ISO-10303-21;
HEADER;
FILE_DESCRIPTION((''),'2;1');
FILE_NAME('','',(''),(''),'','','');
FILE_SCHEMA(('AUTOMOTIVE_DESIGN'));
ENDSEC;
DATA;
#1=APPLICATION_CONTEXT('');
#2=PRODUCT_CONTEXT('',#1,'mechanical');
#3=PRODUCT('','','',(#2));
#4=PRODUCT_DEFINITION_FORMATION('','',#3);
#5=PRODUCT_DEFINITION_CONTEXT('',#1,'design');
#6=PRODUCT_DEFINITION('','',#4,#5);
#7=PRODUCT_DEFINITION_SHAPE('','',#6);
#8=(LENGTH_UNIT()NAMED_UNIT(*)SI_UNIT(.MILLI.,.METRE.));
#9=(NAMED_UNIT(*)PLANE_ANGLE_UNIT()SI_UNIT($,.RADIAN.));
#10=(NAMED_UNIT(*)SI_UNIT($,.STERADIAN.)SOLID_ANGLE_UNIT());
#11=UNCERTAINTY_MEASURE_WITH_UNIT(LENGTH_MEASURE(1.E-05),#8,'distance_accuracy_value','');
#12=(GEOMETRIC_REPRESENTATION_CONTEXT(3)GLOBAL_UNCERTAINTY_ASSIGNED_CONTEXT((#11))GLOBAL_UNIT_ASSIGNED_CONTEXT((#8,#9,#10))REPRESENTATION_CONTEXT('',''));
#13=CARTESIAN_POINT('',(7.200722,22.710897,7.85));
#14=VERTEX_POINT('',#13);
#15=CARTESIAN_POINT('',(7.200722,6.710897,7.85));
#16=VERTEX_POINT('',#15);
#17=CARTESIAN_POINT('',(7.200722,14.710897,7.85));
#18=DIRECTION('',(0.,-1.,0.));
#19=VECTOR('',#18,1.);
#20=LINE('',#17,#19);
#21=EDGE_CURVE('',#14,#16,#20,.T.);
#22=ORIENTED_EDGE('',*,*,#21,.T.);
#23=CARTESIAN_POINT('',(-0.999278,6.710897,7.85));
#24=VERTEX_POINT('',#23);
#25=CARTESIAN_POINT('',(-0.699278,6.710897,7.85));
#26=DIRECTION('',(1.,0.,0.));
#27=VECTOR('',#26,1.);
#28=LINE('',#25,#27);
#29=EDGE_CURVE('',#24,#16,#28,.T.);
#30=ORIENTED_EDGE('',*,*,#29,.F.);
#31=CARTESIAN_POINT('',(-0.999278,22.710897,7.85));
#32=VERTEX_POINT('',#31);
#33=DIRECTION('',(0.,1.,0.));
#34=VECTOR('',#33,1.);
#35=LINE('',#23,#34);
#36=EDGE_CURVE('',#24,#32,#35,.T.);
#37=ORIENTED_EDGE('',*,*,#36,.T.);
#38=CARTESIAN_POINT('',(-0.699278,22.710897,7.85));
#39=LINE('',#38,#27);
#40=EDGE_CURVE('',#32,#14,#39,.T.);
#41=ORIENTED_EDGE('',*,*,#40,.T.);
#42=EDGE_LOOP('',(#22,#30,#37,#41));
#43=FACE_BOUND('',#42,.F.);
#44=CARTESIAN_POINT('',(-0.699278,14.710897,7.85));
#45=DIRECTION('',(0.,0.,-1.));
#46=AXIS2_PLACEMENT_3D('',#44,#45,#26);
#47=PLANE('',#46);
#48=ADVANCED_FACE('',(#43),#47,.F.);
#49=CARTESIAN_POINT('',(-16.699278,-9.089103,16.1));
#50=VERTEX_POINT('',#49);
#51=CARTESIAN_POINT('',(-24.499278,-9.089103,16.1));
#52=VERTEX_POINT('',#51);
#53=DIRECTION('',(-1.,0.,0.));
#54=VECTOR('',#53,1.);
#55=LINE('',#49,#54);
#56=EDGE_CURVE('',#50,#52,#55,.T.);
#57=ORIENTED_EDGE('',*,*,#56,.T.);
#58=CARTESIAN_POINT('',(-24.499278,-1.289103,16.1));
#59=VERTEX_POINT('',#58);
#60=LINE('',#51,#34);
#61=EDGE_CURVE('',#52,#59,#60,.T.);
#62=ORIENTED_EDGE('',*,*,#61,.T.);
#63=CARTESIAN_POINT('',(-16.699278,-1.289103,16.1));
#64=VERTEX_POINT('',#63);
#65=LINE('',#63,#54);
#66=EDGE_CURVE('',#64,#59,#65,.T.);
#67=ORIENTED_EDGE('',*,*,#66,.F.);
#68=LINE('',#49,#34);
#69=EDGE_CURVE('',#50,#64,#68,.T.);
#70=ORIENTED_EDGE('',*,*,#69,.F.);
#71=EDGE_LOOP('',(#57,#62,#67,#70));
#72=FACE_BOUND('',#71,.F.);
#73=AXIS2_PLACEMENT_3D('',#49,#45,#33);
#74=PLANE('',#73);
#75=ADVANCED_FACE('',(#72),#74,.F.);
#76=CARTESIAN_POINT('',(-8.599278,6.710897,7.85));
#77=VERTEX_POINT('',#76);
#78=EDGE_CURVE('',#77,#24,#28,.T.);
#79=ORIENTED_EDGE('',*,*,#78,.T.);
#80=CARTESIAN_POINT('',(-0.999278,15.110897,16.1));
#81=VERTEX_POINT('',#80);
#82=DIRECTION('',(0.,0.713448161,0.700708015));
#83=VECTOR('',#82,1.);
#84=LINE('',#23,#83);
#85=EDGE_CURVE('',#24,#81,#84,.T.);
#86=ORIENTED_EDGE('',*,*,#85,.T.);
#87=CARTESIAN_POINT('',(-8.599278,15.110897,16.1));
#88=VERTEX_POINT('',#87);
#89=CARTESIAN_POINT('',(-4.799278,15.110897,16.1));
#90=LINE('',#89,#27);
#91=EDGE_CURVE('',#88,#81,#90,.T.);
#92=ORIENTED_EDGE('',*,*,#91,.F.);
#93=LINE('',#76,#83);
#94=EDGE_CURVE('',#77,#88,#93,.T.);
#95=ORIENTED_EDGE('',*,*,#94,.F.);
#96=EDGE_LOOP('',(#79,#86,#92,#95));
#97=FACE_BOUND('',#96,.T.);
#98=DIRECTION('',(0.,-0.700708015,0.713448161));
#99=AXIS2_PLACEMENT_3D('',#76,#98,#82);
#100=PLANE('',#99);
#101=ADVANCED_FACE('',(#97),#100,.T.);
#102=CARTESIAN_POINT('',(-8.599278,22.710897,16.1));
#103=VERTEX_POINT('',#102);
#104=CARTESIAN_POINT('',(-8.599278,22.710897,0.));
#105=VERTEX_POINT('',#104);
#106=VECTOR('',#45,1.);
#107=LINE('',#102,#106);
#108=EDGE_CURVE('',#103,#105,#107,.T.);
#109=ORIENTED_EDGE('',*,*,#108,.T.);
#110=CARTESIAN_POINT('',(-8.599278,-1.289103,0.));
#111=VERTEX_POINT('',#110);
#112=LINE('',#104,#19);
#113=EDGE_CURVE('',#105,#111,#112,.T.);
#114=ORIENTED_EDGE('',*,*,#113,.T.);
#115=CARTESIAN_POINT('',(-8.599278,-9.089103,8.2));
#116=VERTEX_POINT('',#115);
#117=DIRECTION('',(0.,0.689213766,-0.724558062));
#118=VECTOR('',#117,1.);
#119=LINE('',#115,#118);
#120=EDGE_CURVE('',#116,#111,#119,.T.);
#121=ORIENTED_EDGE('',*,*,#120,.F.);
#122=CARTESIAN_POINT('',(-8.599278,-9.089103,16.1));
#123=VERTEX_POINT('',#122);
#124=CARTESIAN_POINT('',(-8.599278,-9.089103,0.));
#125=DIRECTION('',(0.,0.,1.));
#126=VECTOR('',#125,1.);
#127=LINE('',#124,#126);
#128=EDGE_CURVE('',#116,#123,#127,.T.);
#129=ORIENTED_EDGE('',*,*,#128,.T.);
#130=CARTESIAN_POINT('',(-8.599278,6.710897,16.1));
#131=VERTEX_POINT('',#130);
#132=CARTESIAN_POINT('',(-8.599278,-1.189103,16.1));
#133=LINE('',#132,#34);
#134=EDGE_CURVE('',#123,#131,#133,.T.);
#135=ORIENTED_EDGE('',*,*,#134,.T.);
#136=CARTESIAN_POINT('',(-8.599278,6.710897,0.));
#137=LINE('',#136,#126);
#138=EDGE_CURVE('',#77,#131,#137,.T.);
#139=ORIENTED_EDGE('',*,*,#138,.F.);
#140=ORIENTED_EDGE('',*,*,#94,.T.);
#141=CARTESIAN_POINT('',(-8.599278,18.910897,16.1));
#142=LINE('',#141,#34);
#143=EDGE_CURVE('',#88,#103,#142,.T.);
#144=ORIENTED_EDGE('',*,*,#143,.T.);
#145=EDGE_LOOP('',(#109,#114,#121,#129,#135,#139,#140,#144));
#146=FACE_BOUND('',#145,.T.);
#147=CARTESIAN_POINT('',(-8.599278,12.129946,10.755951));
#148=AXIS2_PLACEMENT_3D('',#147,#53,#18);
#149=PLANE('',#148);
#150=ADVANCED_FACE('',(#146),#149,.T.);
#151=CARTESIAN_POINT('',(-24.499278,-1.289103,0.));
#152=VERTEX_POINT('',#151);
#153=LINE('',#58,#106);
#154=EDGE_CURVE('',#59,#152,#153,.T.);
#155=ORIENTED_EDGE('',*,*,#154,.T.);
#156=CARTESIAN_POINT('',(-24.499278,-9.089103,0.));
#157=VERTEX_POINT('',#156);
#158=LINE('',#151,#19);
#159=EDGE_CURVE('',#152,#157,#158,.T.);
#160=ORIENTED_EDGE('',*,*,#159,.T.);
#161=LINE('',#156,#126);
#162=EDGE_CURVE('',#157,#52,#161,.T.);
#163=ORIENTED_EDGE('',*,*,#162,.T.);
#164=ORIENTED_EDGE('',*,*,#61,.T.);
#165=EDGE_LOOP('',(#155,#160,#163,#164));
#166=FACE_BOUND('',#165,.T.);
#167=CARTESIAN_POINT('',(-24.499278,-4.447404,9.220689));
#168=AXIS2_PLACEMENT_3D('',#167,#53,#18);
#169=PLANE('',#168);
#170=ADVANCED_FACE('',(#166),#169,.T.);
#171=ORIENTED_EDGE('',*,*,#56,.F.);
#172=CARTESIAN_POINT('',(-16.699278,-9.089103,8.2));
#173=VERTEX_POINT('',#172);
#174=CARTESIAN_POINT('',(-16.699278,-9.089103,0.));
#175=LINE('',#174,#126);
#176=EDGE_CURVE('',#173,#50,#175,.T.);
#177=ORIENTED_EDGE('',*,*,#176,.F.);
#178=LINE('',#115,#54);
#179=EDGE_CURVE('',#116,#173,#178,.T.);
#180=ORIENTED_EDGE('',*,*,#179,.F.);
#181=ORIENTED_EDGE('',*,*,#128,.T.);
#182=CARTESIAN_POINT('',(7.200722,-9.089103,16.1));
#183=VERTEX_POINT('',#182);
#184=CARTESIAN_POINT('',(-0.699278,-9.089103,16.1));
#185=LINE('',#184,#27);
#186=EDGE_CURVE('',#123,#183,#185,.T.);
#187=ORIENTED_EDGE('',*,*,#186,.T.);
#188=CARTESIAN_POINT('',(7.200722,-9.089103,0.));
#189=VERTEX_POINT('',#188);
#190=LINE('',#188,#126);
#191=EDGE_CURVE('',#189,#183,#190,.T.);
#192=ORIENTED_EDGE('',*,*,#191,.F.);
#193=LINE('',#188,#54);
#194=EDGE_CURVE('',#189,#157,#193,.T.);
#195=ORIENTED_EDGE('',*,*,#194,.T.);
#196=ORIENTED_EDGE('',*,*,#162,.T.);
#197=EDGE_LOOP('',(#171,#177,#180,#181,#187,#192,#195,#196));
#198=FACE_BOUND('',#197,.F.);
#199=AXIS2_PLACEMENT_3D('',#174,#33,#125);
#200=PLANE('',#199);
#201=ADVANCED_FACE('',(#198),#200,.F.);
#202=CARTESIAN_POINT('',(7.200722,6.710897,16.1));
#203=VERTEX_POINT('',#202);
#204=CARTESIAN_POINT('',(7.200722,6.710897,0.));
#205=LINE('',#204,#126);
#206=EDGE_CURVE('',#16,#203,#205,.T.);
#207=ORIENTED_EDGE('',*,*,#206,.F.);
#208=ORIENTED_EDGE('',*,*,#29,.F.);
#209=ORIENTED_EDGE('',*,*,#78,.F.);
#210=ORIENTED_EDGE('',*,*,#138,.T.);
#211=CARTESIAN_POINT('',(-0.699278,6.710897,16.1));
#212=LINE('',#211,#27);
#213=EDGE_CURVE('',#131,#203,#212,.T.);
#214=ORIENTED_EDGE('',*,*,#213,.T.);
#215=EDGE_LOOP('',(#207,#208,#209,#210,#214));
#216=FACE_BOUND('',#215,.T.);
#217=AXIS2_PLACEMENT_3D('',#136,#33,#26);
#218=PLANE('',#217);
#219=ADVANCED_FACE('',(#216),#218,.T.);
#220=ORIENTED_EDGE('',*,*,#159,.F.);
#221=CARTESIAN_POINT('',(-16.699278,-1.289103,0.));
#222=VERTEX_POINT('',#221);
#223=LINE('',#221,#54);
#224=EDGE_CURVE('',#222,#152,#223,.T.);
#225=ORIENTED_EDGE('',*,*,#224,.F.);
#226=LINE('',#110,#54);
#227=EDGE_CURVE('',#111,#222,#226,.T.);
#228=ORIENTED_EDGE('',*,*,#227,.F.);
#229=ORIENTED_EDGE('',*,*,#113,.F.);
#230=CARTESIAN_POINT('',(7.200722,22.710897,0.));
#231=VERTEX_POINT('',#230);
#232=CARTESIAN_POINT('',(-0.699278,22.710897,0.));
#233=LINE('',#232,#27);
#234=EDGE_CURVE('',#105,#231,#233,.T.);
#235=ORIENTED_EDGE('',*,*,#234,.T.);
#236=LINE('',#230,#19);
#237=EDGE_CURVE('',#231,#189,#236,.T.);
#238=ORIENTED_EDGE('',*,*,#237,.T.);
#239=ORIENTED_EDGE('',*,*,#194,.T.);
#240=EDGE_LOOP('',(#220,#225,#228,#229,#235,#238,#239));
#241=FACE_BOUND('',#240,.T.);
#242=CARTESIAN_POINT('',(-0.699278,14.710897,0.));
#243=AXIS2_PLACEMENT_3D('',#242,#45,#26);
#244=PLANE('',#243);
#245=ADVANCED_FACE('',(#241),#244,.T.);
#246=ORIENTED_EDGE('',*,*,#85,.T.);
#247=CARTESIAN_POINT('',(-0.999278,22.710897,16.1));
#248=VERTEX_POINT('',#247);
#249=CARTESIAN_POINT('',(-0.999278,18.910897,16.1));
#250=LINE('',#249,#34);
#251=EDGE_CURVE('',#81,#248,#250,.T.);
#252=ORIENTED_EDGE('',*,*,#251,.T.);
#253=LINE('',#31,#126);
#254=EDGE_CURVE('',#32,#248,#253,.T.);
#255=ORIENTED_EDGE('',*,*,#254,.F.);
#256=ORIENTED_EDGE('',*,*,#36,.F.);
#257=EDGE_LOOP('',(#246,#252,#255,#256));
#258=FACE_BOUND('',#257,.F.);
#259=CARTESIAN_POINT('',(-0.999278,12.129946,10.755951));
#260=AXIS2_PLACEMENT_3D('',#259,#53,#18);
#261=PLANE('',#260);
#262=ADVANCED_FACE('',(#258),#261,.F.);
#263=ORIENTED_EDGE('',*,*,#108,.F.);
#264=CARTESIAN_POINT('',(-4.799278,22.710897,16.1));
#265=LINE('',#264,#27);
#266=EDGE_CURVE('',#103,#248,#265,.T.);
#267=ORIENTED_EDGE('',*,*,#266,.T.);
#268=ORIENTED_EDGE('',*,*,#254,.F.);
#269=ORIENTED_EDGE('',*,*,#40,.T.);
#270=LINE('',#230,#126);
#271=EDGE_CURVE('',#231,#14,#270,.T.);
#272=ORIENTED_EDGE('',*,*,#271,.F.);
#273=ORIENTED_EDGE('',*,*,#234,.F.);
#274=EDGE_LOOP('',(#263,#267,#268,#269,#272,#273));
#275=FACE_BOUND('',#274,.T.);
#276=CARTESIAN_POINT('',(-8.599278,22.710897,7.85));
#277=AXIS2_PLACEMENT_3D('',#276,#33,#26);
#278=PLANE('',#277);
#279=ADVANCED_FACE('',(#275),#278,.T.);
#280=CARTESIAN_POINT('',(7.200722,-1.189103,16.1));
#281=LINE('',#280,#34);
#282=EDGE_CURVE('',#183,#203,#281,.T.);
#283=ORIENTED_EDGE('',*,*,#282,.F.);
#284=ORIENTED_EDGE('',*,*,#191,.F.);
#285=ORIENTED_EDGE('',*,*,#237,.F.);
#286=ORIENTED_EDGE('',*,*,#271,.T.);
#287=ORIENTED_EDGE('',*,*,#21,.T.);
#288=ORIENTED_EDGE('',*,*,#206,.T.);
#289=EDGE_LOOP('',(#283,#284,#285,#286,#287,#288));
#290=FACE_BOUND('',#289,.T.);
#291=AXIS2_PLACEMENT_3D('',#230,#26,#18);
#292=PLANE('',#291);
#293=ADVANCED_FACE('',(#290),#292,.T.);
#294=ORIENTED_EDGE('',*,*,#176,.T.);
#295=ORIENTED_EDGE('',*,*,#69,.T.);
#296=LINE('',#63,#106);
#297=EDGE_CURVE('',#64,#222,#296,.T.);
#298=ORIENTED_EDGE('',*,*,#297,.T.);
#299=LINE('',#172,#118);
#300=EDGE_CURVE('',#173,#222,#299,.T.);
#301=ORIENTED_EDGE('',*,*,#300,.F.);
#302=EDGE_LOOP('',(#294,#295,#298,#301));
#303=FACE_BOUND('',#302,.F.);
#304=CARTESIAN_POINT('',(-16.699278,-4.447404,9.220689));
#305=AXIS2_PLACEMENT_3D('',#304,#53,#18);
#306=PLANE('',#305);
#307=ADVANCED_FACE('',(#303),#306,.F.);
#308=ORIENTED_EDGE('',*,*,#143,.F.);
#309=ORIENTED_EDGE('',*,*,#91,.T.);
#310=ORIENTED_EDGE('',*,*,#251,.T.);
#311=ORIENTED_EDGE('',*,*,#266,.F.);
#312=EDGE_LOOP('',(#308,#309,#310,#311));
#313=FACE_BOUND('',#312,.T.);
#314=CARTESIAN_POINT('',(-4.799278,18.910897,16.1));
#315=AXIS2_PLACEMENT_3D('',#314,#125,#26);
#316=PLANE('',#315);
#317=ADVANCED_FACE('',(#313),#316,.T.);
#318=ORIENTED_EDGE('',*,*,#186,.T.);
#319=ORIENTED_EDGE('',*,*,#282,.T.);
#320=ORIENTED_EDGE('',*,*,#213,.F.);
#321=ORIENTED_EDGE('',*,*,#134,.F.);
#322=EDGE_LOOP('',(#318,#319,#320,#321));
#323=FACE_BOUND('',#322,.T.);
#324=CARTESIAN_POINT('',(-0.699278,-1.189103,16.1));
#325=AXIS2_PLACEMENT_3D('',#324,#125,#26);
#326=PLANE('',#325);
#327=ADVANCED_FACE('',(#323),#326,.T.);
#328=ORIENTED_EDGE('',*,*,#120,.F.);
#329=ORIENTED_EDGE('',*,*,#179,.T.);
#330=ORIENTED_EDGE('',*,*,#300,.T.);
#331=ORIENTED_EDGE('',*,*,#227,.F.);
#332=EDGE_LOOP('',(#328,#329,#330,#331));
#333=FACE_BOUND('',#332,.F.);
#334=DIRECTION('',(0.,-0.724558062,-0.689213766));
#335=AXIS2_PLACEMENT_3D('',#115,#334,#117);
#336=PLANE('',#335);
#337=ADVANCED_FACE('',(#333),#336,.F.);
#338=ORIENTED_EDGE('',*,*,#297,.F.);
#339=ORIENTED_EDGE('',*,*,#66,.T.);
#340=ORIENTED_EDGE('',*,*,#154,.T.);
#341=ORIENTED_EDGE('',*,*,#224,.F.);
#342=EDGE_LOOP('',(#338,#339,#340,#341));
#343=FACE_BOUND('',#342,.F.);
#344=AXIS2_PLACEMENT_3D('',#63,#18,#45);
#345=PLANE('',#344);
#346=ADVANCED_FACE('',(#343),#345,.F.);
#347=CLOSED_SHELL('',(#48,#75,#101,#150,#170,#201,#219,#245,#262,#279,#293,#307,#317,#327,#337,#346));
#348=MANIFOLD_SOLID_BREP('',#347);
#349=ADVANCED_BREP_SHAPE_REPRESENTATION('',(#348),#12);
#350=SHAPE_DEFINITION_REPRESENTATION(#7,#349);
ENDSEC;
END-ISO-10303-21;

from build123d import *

# Parameters (mm, degrees)
F0_W      = 15.8
F0_H      = 15.8
F1_DEPTH  = 16.1
F3_DEPTH  = 8.1
F5_DEPTH  = 7.8
F6_W      = 15.8
F6_H      = 16
F7_DEPTH  = 7.85
F8_W      = 7.6
F8_H      = 7.6
F9_DEPTH  = 8.25
F11_DEPTH = 7.6


with BuildPart() as f1:
    # F0 (on Top) → F1 (new body)
    with BuildSketch(Plane.XY):
        with Locations((-0.699278047, -1.1891025347)):
            Rectangle(F0_W, F0_H)
    extrude(amount=F1_DEPTH)

    # F2 (on face) → F3 (join)
    with BuildSketch(Plane(origin=(-8.599278047, 0, 0), x_dir=(0, -1, 0), z_dir=(-1, 0, 0))):
        Polygon((1.2891025347, 0), (9.0891025347, 0), (9.0891025347, 8.2), align=None)
    extrude(amount=F3_DEPTH)

    # F4 (on face) → F5 (join)
    with BuildSketch(Plane(origin=(-16.699278047, 0, 0), x_dir=(0, -1, 0), z_dir=(-1, 0, 0))):
        Polygon((1.2891025347, 16.1), (1.2891025347, 0), (9.0891025347, 8.2), (9.0891025347, 16.1), align=None)
        Polygon((1.2891025347, 0), (9.0891025347, 0), (9.0891025347, 8.2), align=None)
    extrude(amount=F5_DEPTH)

    # F6 (on face) → F7 (join)
    with BuildSketch(Plane(origin=(0, 0, 0), x_dir=(1, 0, 0), z_dir=(0, 0, -1))):
        with Locations((-0.699278047, -14.7108974653)):
            Rectangle(F6_W, F6_H)
    extrude(amount=-F7_DEPTH)

    # F8 (on face) → F9 (join, through all)
    with BuildSketch(Plane.XY.offset(7.85)):
        with Locations((-4.799278047, 18.9108974653)):
            Rectangle(F8_W, F8_H)
    extrude(amount=F9_DEPTH)

    # F10 (on face) → F11 (join, through all)
    with BuildSketch(Plane(origin=(-8.599278047, 0, 0), x_dir=(0, -1, 0), z_dir=(-1, 0, 0))):
        Polygon((-6.7108974653, 7.85), (-15.1108974653, 16.1), (-15.1108974653, 7.85), align=None)
    extrude(amount=-F11_DEPTH)


solid = f1.part
